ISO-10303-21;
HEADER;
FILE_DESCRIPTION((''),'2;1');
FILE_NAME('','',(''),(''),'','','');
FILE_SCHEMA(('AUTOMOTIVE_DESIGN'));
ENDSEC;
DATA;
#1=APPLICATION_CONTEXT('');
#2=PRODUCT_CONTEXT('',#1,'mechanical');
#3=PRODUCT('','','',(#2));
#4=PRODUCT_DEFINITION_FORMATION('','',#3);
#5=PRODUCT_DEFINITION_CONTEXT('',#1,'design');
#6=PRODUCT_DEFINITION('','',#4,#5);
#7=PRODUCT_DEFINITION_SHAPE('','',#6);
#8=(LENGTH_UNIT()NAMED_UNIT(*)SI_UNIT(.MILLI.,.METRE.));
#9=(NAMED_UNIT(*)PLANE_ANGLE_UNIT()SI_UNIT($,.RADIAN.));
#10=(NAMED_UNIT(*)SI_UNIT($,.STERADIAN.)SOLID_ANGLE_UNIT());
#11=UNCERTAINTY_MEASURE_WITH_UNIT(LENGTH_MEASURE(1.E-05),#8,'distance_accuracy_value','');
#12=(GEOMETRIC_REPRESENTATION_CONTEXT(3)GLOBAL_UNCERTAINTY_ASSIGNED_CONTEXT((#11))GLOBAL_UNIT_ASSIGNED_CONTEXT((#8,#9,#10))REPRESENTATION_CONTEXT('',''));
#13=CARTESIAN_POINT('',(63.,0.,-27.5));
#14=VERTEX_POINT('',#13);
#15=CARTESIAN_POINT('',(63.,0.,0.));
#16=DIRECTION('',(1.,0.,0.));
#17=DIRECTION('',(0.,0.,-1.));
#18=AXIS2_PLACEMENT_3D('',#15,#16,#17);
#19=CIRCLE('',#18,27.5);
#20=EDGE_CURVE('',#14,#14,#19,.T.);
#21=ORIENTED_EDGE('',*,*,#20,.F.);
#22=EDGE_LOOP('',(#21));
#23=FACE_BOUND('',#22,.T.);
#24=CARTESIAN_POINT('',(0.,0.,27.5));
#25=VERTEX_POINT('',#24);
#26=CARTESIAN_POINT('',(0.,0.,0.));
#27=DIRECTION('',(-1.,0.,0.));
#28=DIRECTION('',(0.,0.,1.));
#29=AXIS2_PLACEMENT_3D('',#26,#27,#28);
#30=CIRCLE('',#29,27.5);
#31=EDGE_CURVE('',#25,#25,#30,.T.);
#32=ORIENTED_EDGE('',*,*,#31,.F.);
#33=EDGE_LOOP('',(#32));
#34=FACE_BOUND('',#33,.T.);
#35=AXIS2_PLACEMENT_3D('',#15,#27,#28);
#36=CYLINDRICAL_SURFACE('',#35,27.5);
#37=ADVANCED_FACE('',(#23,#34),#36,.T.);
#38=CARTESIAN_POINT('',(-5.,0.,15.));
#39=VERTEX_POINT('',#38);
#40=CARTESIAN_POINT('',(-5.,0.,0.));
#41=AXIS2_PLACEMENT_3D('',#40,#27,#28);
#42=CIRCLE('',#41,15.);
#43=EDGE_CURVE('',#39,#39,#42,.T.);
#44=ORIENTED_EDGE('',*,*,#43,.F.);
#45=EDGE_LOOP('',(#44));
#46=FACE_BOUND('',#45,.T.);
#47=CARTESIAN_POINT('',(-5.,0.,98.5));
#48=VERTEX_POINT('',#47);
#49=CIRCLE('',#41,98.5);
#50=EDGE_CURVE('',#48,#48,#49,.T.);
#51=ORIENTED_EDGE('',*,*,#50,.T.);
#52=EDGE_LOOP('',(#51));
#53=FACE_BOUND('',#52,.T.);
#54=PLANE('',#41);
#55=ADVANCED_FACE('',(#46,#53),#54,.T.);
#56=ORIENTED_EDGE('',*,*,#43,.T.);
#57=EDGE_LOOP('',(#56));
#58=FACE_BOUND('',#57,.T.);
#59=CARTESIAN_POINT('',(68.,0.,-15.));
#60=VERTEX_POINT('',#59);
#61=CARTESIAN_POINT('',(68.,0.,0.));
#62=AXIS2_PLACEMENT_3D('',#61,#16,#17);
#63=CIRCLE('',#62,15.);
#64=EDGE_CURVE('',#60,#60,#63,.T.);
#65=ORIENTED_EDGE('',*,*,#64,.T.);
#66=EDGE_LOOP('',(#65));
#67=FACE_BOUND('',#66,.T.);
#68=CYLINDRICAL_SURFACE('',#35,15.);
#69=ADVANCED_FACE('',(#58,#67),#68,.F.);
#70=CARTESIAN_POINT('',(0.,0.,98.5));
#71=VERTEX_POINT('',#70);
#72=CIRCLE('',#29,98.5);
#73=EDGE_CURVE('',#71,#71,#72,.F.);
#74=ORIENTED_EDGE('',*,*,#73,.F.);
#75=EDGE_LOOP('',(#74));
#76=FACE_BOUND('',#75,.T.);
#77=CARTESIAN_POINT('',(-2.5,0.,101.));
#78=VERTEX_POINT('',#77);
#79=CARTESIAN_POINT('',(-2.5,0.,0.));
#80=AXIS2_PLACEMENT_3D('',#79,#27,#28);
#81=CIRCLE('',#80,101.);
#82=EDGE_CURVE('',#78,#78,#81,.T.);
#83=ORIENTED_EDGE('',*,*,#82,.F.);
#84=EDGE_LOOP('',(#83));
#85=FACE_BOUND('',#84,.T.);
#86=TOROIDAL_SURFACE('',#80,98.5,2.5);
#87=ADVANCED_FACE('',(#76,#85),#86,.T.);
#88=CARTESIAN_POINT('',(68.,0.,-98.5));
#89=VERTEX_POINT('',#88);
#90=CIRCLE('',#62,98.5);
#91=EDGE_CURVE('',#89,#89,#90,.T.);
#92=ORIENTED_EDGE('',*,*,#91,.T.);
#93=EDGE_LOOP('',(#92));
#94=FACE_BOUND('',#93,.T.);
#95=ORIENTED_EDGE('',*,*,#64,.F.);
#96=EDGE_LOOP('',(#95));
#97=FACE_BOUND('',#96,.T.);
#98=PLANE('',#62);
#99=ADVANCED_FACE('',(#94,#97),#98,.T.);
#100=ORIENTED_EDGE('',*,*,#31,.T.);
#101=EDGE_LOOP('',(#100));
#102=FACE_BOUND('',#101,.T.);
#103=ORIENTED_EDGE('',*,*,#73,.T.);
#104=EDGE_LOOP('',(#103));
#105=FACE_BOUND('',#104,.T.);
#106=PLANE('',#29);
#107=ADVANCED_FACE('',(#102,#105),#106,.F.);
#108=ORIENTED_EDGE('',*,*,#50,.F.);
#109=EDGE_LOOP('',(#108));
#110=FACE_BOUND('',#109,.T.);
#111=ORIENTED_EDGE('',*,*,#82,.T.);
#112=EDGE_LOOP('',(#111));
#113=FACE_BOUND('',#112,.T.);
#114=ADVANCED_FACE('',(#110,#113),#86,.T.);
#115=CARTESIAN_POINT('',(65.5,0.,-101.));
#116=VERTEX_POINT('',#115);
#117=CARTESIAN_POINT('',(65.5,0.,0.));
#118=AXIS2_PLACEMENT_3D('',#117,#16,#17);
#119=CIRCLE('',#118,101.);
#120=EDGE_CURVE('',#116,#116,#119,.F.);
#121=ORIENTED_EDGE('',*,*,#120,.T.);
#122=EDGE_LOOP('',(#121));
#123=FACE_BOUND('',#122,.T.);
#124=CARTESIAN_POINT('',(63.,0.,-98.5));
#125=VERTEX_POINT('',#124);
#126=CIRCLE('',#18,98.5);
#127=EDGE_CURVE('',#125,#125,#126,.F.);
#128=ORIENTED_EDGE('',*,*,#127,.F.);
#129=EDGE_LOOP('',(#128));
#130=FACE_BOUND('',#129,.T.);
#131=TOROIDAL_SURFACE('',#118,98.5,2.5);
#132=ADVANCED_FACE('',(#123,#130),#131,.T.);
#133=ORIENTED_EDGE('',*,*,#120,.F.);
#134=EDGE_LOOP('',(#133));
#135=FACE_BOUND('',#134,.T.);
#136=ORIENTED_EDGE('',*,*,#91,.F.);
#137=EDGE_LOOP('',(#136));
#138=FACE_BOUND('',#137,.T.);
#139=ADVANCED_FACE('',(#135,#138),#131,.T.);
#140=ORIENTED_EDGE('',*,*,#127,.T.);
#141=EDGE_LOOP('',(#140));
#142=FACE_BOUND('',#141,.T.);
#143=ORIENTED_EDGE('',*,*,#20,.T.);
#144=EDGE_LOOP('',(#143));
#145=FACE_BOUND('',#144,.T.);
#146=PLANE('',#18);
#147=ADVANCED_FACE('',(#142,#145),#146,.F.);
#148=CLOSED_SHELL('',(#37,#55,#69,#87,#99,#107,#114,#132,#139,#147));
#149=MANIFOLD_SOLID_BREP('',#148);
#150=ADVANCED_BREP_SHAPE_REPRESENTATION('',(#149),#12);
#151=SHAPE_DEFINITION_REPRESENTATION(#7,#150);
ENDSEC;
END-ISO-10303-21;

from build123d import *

# Parameters (mm, degrees)
SKETCH1_R           = 27.5
SKETCH1_R_2         = 15
BOSS_EXTRUDE1_DEPTH = 63
SKETCH2_R           = 101
SKETCH2_R_2         = 15
BOSS_EXTRUDE2_DEPTH = 5
BOSS_EXTRUDE3_START = 5
SKETCH3_R           = 101
SKETCH3_R_2         = 15
BOSS_EXTRUDE3_DEPTH = 5
FILLET1_R           = 2.5


with BuildPart() as part:
    # Sketch1 → Boss-Extrude1 (new body)
    with BuildSketch(Plane(origin=(0, 0, 0), x_dir=(0, 0, -1), z_dir=(1, 0, 0))):
        Circle(SKETCH1_R)
        Circle(SKETCH1_R_2, mode=Mode.SUBTRACT)
    extrude(amount=BOSS_EXTRUDE1_DEPTH)

    # Sketch2 → Boss-Extrude2 (add)
    with BuildSketch(Plane(origin=(63, 0, 0), x_dir=(0, 0, -1), z_dir=(1, 0, 0))):
        Circle(SKETCH2_R)
        Circle(SKETCH2_R_2, mode=Mode.SUBTRACT)
    extrude(amount=BOSS_EXTRUDE2_DEPTH)

    # Sketch3 → Boss-Extrude3 (add)
    with BuildSketch(Plane.ZY.offset(BOSS_EXTRUDE3_START)):
        with Locations(Location((0, 0, 0), (0, 0, 180))):
            Circle(SKETCH3_R)
        Circle(SKETCH3_R_2, mode=Mode.SUBTRACT)
    extrude(amount=-BOSS_EXTRUDE3_DEPTH)

    # Fillet1
    fillet1_edges = [part.edges().sort_by_distance(p)[0] for p in [
        (63, 0, 101),
        (-5, 0, 101),
        (0, 0, 101),
        (68, 0, 101),
    ]]
    fillet(fillet1_edges, radius=FILLET1_R - 0.0001)  # a hair under: the kernel refuses the full size


solid = part.part
